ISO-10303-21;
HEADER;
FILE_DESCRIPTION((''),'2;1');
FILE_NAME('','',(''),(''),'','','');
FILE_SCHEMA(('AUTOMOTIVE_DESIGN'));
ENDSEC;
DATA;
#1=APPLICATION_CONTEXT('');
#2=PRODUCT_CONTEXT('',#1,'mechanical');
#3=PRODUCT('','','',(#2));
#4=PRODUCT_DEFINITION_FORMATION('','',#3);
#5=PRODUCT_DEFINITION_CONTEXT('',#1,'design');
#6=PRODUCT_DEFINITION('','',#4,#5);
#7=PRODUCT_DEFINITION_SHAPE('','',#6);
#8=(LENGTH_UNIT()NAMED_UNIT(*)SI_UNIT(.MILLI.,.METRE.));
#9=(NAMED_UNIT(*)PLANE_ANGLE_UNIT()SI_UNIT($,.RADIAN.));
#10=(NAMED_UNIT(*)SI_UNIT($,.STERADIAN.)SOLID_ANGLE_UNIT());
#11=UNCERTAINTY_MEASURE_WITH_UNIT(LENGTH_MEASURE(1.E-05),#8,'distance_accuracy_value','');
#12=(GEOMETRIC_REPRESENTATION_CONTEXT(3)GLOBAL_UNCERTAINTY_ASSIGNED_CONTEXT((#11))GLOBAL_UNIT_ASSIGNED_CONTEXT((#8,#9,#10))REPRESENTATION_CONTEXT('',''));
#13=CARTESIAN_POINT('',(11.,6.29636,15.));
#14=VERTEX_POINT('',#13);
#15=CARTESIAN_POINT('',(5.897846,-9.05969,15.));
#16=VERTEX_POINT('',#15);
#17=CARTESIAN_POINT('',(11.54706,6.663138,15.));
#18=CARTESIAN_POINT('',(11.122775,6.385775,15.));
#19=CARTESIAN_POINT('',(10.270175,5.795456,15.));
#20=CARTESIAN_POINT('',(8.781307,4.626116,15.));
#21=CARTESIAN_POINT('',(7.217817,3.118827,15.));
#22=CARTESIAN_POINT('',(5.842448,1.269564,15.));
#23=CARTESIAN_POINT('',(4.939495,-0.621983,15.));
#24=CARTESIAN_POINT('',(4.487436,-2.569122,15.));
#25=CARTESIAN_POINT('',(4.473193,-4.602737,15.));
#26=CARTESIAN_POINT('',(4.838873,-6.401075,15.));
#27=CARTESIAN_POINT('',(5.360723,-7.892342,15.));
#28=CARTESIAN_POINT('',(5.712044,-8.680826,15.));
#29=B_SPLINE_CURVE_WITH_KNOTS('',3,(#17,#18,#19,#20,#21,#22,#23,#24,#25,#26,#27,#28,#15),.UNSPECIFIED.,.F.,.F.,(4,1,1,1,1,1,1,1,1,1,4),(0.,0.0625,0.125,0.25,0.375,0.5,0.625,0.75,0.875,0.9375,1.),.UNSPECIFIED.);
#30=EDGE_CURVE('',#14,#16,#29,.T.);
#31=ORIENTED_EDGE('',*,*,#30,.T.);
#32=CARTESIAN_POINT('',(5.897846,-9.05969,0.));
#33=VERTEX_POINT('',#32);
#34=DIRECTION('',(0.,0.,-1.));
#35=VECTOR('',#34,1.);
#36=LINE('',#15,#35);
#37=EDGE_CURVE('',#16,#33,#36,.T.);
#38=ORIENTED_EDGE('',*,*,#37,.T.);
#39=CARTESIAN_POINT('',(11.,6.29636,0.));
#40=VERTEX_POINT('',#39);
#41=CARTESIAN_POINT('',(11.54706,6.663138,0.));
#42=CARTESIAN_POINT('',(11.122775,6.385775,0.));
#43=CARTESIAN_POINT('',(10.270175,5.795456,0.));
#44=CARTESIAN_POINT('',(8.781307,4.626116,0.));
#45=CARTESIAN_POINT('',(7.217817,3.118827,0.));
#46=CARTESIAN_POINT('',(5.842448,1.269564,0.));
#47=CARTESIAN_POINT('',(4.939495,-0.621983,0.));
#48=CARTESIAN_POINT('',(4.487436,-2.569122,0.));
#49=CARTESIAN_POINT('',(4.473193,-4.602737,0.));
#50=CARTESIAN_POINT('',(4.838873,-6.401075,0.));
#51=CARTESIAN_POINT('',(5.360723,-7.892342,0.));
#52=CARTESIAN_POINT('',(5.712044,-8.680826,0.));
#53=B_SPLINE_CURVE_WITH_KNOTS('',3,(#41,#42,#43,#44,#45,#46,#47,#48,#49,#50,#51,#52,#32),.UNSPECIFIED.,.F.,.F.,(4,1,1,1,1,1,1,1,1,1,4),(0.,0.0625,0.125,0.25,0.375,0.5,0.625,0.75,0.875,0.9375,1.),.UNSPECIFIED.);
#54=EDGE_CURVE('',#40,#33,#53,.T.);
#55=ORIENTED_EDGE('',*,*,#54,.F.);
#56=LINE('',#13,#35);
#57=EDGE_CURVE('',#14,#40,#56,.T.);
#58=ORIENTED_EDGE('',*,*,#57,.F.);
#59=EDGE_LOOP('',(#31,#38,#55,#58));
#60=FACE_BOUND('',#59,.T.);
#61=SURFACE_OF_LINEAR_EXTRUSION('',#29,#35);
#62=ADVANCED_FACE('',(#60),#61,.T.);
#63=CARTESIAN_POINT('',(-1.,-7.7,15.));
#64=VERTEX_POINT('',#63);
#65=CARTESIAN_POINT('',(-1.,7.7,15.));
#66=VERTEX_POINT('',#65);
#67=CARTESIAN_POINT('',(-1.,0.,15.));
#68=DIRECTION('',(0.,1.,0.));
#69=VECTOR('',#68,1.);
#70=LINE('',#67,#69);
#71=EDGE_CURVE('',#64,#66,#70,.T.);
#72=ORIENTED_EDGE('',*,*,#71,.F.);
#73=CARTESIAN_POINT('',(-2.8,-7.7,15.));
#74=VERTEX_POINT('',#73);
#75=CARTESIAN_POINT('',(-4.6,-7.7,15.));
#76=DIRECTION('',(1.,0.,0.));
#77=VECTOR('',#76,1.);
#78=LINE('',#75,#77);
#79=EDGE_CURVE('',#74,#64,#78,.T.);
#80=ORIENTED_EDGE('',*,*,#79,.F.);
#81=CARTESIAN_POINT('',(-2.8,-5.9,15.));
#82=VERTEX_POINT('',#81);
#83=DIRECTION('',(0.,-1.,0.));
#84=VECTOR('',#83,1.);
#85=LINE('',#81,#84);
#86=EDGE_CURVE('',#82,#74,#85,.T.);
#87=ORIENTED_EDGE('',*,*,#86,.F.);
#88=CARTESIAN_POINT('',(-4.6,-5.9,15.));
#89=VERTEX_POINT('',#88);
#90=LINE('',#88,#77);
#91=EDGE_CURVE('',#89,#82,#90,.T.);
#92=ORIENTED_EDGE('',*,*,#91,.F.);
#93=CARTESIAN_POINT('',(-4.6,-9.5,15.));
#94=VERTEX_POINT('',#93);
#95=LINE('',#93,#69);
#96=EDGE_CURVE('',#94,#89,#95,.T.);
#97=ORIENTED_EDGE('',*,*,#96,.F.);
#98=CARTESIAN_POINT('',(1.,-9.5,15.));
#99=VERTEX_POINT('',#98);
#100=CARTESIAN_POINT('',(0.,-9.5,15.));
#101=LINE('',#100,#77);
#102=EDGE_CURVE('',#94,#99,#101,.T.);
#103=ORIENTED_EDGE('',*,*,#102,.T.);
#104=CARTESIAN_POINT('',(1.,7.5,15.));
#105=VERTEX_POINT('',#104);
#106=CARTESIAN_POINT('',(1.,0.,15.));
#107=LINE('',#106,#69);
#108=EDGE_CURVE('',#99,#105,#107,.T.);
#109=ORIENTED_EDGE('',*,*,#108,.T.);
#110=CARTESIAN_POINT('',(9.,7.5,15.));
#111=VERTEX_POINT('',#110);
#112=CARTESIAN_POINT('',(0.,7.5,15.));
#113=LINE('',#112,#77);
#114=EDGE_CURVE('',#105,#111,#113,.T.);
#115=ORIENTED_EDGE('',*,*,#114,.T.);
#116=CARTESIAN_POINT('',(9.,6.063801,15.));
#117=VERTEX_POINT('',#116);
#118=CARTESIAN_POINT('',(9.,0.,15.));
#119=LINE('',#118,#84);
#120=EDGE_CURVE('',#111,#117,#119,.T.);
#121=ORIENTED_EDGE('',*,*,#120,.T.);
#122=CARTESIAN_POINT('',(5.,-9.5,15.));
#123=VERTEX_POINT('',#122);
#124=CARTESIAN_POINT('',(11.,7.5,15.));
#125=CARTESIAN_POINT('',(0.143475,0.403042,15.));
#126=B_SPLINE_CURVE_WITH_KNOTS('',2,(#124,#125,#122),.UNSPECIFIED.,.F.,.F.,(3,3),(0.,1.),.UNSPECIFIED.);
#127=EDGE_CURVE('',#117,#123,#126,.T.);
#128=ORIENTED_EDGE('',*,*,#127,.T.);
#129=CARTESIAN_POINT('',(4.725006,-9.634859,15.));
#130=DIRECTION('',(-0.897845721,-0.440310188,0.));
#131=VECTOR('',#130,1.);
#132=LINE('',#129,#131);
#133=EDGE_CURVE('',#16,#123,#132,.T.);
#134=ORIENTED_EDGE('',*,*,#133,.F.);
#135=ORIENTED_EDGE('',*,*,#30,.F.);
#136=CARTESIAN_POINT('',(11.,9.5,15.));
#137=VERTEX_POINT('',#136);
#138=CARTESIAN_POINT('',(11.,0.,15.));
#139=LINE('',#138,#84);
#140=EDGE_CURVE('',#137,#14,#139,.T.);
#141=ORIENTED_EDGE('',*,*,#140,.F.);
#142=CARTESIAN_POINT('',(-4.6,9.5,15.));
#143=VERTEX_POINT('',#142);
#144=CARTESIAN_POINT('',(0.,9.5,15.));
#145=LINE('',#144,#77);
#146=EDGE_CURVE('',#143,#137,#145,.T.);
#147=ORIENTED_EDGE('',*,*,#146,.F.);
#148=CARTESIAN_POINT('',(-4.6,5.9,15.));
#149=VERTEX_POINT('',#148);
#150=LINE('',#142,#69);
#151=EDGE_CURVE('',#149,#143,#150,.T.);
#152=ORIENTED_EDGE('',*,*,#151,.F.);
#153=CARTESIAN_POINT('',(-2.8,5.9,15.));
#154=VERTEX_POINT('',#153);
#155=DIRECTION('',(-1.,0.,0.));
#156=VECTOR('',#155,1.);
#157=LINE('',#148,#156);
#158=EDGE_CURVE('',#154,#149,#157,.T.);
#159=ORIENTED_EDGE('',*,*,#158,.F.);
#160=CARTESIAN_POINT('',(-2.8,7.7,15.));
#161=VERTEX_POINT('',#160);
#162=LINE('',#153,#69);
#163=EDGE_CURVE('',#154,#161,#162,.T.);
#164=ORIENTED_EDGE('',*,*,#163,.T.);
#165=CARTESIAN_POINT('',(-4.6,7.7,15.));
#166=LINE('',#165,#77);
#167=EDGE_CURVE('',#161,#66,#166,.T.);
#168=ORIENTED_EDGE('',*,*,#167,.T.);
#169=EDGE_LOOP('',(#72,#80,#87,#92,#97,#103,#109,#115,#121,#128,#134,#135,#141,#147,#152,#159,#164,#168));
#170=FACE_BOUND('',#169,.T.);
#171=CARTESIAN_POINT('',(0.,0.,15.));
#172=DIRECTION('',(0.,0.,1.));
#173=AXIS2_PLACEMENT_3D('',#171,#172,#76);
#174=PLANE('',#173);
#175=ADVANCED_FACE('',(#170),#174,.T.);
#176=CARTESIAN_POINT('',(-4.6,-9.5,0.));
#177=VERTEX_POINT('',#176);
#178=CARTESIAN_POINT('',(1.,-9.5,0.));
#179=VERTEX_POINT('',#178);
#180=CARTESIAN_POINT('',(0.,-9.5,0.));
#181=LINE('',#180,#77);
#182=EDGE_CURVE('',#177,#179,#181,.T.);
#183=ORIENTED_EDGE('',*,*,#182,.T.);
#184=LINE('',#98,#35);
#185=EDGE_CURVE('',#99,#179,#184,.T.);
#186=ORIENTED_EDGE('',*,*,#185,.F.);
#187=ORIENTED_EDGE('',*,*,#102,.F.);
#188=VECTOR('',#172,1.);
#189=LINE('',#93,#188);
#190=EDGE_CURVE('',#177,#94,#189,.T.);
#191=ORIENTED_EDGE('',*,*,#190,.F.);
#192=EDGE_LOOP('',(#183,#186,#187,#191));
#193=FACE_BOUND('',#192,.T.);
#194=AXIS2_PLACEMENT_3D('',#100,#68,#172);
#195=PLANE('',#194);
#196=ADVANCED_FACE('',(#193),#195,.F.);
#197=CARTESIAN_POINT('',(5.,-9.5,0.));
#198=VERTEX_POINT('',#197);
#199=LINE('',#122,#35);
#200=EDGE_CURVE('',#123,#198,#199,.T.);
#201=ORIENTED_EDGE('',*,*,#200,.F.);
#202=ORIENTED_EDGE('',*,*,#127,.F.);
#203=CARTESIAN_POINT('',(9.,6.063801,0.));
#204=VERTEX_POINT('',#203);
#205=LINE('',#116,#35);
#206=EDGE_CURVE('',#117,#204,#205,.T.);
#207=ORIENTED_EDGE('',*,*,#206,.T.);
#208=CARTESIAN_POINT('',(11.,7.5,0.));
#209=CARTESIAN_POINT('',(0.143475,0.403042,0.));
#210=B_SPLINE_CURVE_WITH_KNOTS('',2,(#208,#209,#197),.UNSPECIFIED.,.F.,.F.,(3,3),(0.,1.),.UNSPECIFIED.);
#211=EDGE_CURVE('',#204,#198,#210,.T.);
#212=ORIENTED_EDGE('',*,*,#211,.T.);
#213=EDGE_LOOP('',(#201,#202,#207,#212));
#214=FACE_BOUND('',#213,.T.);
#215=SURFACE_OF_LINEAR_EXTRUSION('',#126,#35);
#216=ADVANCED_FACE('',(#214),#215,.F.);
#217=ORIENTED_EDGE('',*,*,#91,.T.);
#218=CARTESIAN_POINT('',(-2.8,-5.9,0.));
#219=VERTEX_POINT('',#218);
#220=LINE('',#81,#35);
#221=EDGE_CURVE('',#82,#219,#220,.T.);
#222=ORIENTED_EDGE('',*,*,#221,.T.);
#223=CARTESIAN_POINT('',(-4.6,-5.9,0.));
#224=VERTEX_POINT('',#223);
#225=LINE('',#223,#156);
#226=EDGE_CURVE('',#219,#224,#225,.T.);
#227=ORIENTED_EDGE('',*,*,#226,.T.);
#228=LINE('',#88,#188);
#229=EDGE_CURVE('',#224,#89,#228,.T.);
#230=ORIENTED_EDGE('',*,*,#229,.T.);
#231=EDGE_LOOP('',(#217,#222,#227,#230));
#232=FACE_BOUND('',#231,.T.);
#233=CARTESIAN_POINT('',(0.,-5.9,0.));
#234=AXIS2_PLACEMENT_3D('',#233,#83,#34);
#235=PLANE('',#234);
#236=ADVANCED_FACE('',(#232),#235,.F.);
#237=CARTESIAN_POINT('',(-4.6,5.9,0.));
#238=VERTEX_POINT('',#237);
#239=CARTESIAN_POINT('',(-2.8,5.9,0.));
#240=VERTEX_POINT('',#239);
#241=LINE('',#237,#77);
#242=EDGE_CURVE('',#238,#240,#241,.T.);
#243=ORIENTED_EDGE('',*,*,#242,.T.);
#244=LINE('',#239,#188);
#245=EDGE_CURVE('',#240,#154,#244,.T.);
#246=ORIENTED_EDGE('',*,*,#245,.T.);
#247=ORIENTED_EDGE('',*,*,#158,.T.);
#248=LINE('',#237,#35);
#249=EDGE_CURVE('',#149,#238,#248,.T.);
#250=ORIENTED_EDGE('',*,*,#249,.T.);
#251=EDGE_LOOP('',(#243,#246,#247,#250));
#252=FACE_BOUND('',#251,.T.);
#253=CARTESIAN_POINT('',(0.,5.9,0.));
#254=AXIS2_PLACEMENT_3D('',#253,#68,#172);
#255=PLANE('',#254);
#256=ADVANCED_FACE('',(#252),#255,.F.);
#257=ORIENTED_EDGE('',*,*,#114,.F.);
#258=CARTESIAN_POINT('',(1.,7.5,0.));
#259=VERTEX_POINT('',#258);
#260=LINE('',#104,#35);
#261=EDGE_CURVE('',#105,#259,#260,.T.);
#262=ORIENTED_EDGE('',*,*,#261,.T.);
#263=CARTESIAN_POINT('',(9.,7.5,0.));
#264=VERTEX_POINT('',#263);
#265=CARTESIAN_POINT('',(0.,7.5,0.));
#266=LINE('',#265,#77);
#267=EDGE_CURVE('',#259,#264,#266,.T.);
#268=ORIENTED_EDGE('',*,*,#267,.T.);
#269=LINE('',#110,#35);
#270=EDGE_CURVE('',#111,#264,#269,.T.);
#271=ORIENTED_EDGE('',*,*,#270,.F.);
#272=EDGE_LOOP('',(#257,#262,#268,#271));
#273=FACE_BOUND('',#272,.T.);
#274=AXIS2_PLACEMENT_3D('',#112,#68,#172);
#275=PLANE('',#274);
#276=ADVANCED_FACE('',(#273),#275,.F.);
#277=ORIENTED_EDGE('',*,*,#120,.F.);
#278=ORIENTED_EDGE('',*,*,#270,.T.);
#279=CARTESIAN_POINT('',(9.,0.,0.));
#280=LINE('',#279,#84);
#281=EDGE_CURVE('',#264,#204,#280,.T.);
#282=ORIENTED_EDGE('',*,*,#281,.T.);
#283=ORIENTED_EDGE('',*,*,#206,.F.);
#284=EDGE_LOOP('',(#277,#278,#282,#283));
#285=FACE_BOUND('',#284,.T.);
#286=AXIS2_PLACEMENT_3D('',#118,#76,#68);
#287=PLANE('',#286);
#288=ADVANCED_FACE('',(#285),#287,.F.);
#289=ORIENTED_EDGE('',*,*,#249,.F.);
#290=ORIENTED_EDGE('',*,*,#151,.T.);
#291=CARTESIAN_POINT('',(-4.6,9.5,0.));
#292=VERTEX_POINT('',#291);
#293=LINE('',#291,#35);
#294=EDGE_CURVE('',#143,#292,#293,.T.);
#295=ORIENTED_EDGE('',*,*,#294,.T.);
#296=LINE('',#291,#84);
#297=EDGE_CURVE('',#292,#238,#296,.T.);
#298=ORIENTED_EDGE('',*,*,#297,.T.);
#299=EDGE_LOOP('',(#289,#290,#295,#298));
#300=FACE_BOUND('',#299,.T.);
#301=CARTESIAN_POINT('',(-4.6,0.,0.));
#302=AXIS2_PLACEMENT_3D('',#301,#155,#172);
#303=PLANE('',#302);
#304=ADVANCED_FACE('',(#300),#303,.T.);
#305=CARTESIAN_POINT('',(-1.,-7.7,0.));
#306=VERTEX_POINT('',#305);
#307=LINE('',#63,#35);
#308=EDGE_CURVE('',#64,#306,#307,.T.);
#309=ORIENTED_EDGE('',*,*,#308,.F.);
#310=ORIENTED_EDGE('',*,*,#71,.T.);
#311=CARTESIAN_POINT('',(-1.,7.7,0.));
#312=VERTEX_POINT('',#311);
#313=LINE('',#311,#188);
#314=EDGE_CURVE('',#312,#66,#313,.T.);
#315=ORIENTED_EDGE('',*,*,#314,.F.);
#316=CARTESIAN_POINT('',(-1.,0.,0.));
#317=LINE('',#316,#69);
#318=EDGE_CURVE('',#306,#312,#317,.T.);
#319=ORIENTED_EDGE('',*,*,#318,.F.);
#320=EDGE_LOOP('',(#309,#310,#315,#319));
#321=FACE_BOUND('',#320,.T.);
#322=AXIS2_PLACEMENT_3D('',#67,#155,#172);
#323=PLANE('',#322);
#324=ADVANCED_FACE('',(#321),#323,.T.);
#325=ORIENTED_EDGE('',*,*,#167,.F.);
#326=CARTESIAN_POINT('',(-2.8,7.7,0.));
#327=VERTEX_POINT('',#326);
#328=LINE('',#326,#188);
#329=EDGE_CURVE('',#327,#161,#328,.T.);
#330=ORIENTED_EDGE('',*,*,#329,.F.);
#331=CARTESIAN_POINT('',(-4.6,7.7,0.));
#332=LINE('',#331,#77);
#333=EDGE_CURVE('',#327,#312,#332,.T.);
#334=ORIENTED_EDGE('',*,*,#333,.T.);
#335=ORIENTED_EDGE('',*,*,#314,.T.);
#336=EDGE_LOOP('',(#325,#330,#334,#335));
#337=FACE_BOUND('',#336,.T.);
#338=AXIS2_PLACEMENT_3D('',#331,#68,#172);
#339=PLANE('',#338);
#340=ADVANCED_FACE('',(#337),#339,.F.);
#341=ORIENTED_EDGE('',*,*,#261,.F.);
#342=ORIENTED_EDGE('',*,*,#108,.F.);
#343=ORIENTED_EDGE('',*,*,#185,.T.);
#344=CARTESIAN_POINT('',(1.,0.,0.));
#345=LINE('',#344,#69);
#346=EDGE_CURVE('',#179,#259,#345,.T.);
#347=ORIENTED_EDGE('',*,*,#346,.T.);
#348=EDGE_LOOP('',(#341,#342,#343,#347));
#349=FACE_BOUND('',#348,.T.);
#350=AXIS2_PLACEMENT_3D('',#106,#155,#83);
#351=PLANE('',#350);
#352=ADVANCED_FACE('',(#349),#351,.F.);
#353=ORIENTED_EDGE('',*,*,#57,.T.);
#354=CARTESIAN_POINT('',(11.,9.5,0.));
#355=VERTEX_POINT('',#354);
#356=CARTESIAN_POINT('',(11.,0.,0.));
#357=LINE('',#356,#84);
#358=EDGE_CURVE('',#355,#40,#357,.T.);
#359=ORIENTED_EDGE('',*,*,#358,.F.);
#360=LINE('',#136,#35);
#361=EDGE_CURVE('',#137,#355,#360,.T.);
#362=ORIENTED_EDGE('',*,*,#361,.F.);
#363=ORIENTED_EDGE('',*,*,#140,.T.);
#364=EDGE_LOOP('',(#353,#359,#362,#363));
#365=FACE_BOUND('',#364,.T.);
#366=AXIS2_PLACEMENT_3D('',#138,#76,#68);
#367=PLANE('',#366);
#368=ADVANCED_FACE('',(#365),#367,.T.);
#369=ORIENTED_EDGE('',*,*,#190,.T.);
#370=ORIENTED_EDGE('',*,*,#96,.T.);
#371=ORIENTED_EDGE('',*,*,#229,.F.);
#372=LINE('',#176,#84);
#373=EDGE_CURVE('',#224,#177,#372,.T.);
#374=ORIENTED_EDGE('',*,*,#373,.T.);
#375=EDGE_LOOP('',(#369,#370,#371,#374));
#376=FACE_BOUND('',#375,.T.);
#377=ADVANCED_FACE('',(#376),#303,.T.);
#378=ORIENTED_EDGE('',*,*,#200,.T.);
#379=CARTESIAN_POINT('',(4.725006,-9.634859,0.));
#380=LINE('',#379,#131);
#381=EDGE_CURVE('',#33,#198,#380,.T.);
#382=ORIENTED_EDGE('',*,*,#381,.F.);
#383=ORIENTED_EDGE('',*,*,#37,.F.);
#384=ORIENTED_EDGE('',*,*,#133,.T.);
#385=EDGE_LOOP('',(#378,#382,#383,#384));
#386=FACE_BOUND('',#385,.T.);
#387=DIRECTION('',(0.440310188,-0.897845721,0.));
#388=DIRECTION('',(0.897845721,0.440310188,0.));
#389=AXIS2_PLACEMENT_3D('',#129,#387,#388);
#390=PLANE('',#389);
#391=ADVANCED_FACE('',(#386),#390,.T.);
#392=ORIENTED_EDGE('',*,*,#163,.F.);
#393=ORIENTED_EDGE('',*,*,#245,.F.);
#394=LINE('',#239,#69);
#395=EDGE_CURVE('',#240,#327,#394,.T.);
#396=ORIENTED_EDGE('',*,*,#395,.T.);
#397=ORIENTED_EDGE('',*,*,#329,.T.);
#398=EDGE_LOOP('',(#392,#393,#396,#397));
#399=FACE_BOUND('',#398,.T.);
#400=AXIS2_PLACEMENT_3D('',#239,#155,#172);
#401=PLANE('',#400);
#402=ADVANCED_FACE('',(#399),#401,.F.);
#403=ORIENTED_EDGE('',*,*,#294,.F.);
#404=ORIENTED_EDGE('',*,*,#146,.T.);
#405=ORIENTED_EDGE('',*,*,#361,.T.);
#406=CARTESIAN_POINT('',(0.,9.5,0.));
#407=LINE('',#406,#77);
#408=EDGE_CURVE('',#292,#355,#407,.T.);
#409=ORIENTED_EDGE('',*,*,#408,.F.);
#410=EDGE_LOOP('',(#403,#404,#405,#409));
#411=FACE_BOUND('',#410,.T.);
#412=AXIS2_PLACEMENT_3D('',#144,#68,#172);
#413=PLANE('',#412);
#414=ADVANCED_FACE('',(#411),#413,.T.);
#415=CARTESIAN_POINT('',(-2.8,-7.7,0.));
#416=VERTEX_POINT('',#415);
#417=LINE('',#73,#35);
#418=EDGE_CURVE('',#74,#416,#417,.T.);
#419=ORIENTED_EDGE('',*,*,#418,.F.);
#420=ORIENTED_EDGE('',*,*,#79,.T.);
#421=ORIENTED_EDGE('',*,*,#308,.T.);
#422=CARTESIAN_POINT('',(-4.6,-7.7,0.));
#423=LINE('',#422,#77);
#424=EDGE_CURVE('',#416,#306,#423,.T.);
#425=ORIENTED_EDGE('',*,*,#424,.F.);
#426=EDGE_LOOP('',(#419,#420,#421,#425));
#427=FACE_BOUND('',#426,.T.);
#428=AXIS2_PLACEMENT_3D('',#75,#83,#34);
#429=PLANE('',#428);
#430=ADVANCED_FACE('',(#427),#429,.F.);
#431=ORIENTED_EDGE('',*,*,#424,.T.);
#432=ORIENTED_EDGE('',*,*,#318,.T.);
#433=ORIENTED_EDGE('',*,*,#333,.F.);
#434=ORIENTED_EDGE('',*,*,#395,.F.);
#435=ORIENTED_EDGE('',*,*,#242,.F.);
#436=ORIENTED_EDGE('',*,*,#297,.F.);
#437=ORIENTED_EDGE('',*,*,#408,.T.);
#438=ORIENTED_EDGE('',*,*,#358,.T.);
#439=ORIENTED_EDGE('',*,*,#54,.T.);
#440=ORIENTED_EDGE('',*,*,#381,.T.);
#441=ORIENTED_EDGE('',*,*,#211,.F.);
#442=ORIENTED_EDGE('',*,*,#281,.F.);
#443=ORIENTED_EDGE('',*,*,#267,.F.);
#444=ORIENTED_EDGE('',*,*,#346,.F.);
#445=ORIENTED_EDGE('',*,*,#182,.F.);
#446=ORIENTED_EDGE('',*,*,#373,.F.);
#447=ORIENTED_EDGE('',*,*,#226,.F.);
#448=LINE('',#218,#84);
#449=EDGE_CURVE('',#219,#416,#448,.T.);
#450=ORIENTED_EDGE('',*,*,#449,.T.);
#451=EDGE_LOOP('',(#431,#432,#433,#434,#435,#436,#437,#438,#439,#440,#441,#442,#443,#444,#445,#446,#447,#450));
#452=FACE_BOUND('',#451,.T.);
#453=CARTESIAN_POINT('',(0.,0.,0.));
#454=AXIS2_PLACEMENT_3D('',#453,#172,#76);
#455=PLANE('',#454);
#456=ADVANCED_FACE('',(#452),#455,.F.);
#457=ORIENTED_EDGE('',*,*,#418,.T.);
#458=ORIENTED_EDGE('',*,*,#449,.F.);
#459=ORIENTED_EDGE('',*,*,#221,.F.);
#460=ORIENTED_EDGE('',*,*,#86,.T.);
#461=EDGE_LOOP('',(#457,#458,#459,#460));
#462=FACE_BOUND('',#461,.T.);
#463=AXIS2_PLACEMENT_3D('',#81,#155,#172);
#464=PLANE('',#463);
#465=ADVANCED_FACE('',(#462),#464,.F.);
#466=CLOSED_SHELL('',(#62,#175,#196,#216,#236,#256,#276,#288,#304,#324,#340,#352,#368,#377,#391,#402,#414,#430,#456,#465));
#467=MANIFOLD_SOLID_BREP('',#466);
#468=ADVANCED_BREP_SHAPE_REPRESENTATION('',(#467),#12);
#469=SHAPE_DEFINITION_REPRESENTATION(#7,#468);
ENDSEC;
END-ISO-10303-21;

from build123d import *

# Parameters (mm, degrees)
AUFSATZ_LINEAR_AUSTRAGEN1_DEPTH = 15
SKIZZE8_W                       = 15
SKIZZE8_H                       = 1.8
AUFSATZ_LINEAR_AUSTRAGEN2_DEPTH = 3.6
SKIZZE9_W                       = 1.8
SKIZZE9_H                       = 15
AUFSATZ_LINEAR_AUSTRAGEN3_DEPTH = 1.8
SKIZZE10_W                      = 1.8
SKIZZE10_H                      = 15
AUFSATZ_LINEAR_AUSTRAGEN4_DEPTH = 1.8


# Read off the part's stored shape, not the designer's step: Aufsatz-Linear austragen1
with BuildPart() as part:
    # Aufsatz-Linear austragen1 outline → Aufsatz-Linear austragen1 (new body)
    with BuildSketch(Plane.XY):
        with BuildLine():
            Line((9, 7.5), (9, 6.063801072))
            add(Edge.make_bspline(
                [(9, 6.063801072), (0.625422786, -0.579708044), (5, -9.5)],
                knots=[0.099237207, 0.099237207, 0.099237207, 1, 1, 1], degree=2))
            Line((5, -9.5), (5.897845721, -9.059689812))
            add(Edge.make_bspline(
                [(11, 6.296359693), (10.760549258, 6.131767377), (10.109849177, 5.669537639), (8.781306837, 4.626115655), (7.217816891, 3.118827009), (5.842447746, 1.269563984), (4.939494511, -0.621982734), (4.487436221, -2.56912246), (4.473192517, -4.602736578), (4.838873177, -6.401075315), (5.360722545, -7.892341674), (5.712043828, -8.68082614), (5.897845721, -9.059689812)],
                knots=[0.026920818, 0.026920818, 0.026920818, 0.026920818, 0.0625, 0.125, 0.25, 0.375, 0.5, 0.625, 0.75, 0.875, 0.9375, 1, 1, 1, 1], degree=3))
            Line((11, 6.296359693), (11, 9.5))
            Line((11, 9.5), (-1, 9.5))
            Line((-1, 9.5), (-1, -9.5))
            Line((-1, -9.5), (1, -9.5))
            Line((1, -9.5), (1, 7.5))
            Line((1, 7.5), (9, 7.5))
        make_face()
    extrude(amount=AUFSATZ_LINEAR_AUSTRAGEN1_DEPTH)

    # Skizze8 → Aufsatz-Linear austragen2 (add)
    with BuildSketch(Plane.ZY.offset(1)):
        with Locations((7.5, 8.6)):
            Rectangle(SKIZZE8_W, SKIZZE8_H)
        with Locations((7.5, -8.6)):
            Rectangle(SKIZZE8_W, SKIZZE8_H)
    extrude(amount=AUFSATZ_LINEAR_AUSTRAGEN2_DEPTH)

    # Skizze9 → Aufsatz-Linear austragen3 (add)
    with BuildSketch(Plane(origin=(0, -7.7, 0), x_dir=(1, 0, 0), z_dir=(0, 1, 0))):
        with Locations((-3.7, -7.5)):
            Rectangle(SKIZZE9_W, SKIZZE9_H)
    extrude(amount=AUFSATZ_LINEAR_AUSTRAGEN3_DEPTH)

    # Skizze10 → Aufsatz-Linear austragen4 (add)
    with BuildSketch(Plane.XZ.offset(-7.7)):
        with Locations((-3.7, 7.5)):
            Rectangle(SKIZZE10_W, SKIZZE10_H)
    extrude(amount=AUFSATZ_LINEAR_AUSTRAGEN4_DEPTH)


solid = part.part
